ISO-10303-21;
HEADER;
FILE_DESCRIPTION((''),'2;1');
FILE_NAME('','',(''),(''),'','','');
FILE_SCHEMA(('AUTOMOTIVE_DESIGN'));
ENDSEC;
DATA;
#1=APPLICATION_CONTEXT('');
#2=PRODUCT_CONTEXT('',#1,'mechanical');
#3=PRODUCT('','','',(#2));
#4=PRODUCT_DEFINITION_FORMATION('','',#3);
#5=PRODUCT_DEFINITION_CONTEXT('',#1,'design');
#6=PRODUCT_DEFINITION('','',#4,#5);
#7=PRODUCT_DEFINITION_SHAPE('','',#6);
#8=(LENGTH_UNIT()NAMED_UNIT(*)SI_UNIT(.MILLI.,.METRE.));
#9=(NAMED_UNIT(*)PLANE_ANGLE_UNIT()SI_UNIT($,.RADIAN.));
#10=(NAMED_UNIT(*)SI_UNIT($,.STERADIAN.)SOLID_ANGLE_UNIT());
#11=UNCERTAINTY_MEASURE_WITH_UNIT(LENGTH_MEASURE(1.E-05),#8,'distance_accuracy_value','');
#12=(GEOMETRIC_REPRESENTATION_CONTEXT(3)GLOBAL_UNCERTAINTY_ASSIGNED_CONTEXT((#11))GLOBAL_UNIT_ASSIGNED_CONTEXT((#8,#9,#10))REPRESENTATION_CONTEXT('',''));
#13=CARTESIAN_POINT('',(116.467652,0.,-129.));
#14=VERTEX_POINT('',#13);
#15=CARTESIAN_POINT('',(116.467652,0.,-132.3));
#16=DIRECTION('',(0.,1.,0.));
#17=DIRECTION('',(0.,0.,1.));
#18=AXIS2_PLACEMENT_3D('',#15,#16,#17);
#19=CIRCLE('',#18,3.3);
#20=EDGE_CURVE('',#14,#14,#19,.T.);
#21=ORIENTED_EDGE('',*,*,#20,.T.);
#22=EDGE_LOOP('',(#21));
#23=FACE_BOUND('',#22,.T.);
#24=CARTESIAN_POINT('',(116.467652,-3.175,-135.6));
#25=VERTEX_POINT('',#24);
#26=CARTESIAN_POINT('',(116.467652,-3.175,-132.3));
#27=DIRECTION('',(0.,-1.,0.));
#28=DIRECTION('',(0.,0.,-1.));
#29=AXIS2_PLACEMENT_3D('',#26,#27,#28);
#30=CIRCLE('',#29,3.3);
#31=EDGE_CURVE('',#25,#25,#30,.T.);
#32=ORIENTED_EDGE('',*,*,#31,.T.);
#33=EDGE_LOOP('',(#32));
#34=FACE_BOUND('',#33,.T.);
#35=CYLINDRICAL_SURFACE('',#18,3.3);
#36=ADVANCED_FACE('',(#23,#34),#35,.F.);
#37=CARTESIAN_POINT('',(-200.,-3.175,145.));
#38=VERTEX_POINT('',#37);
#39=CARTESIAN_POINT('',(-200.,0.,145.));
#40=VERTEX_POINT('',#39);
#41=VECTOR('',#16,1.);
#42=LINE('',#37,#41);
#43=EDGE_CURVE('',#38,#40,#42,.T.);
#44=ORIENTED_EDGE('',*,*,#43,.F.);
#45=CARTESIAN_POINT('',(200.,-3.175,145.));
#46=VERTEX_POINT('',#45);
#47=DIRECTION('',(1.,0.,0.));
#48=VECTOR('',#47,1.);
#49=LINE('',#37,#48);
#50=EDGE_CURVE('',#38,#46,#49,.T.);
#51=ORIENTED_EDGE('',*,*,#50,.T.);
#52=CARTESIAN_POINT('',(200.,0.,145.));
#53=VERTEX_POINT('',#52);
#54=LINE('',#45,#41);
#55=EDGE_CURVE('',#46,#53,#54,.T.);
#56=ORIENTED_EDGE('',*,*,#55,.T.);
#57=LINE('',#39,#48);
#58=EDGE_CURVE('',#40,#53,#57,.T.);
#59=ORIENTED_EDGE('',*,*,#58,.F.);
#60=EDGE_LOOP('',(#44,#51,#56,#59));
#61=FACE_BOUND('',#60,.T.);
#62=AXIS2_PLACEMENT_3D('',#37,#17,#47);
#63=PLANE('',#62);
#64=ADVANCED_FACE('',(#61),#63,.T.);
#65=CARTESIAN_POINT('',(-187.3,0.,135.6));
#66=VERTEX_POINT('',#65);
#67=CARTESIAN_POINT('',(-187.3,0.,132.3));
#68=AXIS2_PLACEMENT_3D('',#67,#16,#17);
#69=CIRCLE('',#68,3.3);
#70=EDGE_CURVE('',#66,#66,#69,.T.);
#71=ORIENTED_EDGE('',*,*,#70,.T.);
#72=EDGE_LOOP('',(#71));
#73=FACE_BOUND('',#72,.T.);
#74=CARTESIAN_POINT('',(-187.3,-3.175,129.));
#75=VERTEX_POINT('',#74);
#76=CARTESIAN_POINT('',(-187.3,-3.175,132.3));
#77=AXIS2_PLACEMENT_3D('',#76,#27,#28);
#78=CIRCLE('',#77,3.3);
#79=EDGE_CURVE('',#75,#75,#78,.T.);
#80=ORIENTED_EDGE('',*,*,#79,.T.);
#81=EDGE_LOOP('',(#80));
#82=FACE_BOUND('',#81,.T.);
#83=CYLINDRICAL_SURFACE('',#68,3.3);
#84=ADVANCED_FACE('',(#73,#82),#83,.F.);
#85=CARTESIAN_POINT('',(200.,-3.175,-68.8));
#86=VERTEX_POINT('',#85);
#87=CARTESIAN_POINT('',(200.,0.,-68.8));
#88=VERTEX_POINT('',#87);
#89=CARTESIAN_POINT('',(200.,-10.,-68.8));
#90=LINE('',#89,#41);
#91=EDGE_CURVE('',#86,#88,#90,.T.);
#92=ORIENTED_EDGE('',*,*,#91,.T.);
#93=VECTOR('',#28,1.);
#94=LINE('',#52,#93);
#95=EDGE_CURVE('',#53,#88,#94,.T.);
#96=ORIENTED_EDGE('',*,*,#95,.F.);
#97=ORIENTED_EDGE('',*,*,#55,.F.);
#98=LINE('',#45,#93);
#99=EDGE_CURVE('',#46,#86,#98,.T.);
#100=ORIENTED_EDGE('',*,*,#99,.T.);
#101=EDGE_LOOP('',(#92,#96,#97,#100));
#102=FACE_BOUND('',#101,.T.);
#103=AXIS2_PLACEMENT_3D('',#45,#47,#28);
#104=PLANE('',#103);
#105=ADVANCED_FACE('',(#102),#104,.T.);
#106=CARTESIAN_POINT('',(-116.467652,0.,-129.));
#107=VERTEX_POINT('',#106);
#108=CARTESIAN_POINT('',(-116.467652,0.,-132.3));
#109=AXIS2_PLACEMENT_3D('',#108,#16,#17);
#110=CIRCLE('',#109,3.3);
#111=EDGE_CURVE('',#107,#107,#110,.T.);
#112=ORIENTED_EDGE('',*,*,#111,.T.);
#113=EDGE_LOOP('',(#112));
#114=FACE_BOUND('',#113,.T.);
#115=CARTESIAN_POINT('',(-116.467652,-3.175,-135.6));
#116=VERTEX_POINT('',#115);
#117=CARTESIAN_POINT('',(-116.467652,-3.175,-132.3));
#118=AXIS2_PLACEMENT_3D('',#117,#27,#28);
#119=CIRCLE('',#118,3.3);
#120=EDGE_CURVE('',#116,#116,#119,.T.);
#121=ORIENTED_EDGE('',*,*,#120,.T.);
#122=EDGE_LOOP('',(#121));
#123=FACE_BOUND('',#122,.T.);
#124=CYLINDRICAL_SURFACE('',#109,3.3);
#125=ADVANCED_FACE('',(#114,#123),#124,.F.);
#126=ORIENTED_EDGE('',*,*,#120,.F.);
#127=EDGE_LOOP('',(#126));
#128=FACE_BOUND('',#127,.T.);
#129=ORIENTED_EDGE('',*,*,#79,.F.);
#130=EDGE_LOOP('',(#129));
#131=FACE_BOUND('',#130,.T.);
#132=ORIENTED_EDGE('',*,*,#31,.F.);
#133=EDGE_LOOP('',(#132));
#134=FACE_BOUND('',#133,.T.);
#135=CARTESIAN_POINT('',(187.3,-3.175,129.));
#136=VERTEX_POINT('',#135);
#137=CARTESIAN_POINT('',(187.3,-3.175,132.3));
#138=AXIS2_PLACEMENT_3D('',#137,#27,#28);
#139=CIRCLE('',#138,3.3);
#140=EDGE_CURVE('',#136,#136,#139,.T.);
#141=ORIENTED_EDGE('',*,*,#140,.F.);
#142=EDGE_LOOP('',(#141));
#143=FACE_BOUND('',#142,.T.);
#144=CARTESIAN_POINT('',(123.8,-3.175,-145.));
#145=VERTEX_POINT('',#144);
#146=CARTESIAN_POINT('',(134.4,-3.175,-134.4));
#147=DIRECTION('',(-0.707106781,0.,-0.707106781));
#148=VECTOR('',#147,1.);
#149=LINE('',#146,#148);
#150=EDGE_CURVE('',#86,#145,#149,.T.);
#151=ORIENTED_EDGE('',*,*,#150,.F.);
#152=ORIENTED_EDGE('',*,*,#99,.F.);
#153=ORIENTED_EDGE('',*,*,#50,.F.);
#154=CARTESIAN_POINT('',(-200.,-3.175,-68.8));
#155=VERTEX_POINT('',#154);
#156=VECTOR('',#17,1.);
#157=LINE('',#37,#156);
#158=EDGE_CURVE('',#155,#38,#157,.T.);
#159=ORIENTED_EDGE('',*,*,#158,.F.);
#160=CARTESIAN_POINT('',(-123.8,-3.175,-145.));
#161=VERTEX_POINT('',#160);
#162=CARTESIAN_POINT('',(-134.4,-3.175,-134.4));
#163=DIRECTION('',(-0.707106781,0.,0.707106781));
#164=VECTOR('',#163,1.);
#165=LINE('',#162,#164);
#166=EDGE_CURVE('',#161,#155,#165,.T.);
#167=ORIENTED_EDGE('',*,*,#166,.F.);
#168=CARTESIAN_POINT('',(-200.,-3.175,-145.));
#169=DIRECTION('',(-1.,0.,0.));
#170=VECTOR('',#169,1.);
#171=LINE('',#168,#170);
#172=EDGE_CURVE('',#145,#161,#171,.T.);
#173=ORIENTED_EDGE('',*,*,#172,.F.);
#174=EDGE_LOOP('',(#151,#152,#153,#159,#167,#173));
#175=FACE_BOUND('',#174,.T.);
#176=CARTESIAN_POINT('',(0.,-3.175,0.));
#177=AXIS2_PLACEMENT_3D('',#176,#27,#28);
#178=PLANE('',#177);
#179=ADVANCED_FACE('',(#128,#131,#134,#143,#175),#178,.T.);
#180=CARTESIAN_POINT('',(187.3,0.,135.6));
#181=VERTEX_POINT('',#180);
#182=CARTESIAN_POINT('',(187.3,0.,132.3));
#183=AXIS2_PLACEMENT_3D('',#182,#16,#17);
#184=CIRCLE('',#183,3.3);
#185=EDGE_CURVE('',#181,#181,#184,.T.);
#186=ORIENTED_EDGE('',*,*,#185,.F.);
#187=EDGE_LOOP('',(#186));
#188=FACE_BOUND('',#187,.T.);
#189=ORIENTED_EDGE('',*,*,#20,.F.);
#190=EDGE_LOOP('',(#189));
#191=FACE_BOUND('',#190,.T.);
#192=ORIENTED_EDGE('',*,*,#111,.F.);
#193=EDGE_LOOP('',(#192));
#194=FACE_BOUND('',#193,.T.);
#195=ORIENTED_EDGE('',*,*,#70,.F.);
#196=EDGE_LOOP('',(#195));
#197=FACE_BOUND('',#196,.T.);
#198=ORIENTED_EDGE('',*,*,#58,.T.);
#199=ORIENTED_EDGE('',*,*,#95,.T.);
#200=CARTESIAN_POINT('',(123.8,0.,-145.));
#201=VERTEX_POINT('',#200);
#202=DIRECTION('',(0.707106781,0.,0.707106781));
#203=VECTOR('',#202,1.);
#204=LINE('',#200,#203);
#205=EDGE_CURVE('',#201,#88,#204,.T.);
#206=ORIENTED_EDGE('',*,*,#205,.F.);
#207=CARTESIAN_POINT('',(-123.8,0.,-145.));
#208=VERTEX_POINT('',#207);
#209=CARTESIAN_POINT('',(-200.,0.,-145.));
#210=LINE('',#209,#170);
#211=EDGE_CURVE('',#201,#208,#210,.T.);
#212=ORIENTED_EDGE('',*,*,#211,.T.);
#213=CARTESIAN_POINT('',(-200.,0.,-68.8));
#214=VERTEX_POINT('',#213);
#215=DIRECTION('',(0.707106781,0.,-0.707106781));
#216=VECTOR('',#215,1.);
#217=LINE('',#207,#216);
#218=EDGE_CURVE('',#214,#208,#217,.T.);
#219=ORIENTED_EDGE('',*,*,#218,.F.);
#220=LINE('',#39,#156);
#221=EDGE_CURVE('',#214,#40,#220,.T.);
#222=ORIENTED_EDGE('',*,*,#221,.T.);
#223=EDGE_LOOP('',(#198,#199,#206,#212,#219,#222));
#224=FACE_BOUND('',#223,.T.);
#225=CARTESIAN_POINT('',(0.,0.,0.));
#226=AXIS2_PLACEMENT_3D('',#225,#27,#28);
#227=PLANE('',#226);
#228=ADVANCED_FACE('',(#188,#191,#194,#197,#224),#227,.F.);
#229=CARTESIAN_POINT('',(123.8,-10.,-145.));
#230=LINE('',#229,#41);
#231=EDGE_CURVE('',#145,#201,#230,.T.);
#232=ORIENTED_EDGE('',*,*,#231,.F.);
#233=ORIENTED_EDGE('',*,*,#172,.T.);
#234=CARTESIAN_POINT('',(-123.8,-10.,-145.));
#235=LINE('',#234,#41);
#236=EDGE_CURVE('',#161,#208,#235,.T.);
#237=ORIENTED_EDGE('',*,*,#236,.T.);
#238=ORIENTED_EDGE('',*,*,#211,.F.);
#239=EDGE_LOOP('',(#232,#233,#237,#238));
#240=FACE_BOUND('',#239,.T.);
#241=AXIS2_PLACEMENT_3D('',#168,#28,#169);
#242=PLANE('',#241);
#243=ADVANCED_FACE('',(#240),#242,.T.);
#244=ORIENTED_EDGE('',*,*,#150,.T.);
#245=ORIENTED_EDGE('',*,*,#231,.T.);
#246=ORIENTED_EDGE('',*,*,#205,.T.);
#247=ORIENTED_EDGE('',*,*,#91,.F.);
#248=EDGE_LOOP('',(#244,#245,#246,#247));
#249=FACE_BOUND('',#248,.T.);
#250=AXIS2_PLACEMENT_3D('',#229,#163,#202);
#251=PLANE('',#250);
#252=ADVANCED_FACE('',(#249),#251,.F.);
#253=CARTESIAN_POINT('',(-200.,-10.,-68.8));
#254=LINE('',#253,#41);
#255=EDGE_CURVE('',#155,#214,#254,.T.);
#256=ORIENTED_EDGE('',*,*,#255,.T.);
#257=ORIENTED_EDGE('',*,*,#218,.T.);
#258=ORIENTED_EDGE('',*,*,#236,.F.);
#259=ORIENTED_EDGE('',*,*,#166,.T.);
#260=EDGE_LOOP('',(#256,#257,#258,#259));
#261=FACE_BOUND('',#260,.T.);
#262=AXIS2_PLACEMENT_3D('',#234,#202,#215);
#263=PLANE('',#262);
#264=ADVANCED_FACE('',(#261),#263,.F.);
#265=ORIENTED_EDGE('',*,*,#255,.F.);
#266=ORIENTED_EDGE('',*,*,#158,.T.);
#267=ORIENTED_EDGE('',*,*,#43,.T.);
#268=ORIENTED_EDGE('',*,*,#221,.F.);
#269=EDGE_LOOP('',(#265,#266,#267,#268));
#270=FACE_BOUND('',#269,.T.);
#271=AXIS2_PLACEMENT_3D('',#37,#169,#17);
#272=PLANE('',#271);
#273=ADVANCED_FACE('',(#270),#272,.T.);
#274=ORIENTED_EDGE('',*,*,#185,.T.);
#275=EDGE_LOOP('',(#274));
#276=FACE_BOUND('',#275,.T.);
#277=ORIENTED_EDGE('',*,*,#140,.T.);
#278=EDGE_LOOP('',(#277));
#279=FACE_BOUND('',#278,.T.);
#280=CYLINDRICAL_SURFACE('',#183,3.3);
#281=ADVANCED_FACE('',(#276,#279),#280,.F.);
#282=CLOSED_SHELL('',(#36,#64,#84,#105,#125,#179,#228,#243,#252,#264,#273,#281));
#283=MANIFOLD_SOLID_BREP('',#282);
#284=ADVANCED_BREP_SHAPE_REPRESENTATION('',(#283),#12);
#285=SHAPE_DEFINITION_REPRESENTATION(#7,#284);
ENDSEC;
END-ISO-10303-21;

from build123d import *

# Parameters (mm, degrees)
SKETCH2_W                = 400
SKETCH2_H                = 290
BASE_FLANGE1_DEPTH       = 3.175
CUT_EXTRUDE1_DEPTH       = 10
M6_CLEARANCE_HOLE1_D     = 6.6
M6_CLEARANCE_HOLE1_DEPTH = 18.75
M6_CLEARANCE_HOLE1_TIP   = 1.982840043


# Sheet-metal steps are written as plain solids
with BuildPart() as part:
    # Sketch2 (on Top Plane) → Base-Flange1 (new body)
    with BuildSketch(Plane(origin=(0, 0, 0), x_dir=(1, 0, 0), z_dir=(0, 1, 0))):
        Rectangle(SKETCH2_W, SKETCH2_H)
    extrude(amount=-BASE_FLANGE1_DEPTH)

    # Sketch10 → Cut-Extrude1 (cut)
    with BuildSketch(Plane(origin=(0, 0, 0), x_dir=(1, 0, 0), z_dir=(0, 1, 0))):
        Polygon((200, 68.8), (200, 145), (123.8, 145), align=None)
        Polygon((-200, 145), (-123.8, 145), (-200, 68.8), align=None)
    extrude(amount=-CUT_EXTRUDE1_DEPTH, mode=Mode.SUBTRACT)

    # M6 Clearance Hole1
    with Locations(Plane(origin=(0, 0, 0), x_dir=(1, 0, 0), z_dir=(0, 1, 0))):
        with Locations((-187.3, -132.3), (187.3, -132.3), (116.467651581, 132.3), (-116.467651581, 132.3)):
            Hole(M6_CLEARANCE_HOLE1_D / 2, depth=M6_CLEARANCE_HOLE1_DEPTH)
            with Locations((0, 0, -(M6_CLEARANCE_HOLE1_DEPTH + M6_CLEARANCE_HOLE1_TIP / 2))):  # 118° drill point
                Cone(0, M6_CLEARANCE_HOLE1_D / 2, M6_CLEARANCE_HOLE1_TIP, mode=Mode.SUBTRACT)


solid = part.part
